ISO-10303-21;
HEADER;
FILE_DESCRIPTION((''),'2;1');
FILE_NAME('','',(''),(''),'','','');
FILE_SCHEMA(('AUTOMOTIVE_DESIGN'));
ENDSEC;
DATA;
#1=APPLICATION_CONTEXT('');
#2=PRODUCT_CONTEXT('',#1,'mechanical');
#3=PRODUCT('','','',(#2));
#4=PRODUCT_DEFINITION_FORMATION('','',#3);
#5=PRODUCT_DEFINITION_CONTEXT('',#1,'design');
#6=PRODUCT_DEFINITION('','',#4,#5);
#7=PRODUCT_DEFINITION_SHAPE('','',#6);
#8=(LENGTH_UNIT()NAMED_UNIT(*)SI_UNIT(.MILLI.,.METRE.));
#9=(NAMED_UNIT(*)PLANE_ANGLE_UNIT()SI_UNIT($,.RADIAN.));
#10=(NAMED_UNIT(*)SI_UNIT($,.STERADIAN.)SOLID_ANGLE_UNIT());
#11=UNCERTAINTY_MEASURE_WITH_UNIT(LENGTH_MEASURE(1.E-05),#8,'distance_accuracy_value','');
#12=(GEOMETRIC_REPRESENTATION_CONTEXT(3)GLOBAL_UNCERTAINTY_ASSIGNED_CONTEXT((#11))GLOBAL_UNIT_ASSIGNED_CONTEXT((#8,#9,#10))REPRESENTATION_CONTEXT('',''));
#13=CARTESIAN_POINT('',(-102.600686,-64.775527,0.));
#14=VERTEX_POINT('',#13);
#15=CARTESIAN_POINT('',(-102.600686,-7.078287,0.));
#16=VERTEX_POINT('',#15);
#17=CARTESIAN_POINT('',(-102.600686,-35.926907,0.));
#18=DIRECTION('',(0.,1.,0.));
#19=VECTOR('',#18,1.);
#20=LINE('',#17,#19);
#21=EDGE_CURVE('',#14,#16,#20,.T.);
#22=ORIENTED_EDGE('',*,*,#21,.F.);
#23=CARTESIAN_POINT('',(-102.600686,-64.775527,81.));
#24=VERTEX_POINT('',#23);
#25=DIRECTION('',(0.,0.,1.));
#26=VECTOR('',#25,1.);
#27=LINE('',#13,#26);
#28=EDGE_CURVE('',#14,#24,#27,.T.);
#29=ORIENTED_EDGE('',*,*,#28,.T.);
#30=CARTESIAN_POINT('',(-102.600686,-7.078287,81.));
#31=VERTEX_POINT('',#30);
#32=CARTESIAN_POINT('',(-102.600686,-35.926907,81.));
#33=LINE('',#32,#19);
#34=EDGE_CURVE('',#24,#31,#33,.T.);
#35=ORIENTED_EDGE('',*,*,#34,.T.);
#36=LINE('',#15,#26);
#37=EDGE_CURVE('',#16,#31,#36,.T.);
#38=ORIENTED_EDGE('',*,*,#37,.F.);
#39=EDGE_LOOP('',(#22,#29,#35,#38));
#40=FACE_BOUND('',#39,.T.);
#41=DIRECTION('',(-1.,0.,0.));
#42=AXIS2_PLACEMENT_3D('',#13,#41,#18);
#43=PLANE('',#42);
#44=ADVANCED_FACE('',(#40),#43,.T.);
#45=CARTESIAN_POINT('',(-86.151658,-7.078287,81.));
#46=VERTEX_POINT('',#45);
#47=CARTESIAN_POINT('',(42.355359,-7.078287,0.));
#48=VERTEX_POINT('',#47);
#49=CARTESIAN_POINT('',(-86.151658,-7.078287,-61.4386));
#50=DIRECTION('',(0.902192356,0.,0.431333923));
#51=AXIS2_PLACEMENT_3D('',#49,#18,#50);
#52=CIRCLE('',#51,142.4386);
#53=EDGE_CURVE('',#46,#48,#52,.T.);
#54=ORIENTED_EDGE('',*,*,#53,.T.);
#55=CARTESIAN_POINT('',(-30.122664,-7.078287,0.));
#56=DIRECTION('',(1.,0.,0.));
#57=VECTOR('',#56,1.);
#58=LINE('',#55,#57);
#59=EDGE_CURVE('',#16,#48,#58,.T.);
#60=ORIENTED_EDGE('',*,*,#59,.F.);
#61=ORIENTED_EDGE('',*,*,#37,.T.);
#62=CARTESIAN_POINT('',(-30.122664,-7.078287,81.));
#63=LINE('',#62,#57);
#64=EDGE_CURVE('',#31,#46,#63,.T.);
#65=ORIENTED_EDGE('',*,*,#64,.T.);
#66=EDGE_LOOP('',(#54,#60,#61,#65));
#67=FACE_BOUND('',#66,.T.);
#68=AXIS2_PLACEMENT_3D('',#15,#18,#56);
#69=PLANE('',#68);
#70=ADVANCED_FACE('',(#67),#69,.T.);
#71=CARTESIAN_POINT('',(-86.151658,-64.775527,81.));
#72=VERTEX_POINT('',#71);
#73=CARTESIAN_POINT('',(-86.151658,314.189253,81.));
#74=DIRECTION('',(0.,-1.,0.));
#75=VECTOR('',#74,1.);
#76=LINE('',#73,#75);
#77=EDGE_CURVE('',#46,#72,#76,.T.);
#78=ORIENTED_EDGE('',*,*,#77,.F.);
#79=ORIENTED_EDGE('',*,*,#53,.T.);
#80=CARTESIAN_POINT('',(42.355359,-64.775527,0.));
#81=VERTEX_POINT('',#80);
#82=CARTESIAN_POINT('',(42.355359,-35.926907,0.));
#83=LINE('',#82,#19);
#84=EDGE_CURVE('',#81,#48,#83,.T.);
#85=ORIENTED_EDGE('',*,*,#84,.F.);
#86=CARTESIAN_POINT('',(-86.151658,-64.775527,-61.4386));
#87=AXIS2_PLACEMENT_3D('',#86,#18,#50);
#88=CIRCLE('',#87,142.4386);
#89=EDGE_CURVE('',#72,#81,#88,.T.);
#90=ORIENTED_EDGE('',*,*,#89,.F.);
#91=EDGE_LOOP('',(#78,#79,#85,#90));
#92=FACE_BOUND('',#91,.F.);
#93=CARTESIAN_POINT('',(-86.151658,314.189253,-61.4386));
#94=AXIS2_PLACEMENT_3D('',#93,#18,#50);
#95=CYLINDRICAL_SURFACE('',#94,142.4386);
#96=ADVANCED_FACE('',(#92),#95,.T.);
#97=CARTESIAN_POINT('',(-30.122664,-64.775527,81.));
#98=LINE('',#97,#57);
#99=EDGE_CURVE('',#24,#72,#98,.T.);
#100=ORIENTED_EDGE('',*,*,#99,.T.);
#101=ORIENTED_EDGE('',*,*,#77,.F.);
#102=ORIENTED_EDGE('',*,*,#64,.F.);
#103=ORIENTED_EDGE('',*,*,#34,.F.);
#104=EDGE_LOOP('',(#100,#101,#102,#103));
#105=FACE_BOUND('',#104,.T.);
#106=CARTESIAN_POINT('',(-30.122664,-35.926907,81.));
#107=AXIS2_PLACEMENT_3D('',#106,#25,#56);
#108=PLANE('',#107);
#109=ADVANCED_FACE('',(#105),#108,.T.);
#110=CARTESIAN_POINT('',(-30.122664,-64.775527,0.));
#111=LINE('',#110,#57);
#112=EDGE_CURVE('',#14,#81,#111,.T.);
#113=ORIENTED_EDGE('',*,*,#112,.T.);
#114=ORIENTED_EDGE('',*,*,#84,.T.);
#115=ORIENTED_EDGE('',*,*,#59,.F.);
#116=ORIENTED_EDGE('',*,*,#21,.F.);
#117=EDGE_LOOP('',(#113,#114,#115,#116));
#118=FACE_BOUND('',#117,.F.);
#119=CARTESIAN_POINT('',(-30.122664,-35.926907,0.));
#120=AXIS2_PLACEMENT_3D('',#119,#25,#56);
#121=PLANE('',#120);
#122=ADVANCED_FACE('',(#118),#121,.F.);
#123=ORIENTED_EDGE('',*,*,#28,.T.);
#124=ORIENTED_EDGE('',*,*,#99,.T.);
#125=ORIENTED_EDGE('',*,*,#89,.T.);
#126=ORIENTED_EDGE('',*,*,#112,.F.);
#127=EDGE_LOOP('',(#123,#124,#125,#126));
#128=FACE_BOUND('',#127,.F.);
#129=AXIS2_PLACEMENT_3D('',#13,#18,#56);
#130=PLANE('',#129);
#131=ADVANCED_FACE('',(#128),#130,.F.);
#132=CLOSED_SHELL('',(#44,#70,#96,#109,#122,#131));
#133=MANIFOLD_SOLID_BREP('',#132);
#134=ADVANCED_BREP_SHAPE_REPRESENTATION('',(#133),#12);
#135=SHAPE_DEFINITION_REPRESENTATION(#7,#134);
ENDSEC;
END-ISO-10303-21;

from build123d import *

# Parameters (mm, degrees)
F0_W        = 144.9560448527
F0_H        = 57.6972393319
F1_DEPTH    = 81
F2_T1_DEPTH = 700.2323206536


# Not quite as in the source:
# - a fillet or chamfer that OpenCascade refuses, or shapes differently, is made with other operations: its cross-section is extruded or revolved along the edge and cut away or added


with BuildPart() as f1:
    # F0 (on Top) → F1 (new body)
    with BuildSketch(Plane.XY):
        with Locations((-30.1226638258, -35.9269068576)):
            Rectangle(F0_W, F0_H)
    extrude(amount=F1_DEPTH)

    # F2: fillet of radius 142.43860018 on 1 edges, made by hand

    # F2_s2 → F2_t1 (cut)
    with BuildSketch(Plane.XZ.offset(-314.1892534691)):
        with BuildLine():
            ThreePointArc((42.3553586006, 0), (-10.199282406, 59.060327259), (-86.1516576637, 81))
            Line((-86.1516576637, 81), (42.3553586006, 81))
            Line((42.3553586006, 81), (42.3553586006, 0))
        make_face()
    extrude(amount=F2_T1_DEPTH, mode=Mode.SUBTRACT)


solid = f1.part
